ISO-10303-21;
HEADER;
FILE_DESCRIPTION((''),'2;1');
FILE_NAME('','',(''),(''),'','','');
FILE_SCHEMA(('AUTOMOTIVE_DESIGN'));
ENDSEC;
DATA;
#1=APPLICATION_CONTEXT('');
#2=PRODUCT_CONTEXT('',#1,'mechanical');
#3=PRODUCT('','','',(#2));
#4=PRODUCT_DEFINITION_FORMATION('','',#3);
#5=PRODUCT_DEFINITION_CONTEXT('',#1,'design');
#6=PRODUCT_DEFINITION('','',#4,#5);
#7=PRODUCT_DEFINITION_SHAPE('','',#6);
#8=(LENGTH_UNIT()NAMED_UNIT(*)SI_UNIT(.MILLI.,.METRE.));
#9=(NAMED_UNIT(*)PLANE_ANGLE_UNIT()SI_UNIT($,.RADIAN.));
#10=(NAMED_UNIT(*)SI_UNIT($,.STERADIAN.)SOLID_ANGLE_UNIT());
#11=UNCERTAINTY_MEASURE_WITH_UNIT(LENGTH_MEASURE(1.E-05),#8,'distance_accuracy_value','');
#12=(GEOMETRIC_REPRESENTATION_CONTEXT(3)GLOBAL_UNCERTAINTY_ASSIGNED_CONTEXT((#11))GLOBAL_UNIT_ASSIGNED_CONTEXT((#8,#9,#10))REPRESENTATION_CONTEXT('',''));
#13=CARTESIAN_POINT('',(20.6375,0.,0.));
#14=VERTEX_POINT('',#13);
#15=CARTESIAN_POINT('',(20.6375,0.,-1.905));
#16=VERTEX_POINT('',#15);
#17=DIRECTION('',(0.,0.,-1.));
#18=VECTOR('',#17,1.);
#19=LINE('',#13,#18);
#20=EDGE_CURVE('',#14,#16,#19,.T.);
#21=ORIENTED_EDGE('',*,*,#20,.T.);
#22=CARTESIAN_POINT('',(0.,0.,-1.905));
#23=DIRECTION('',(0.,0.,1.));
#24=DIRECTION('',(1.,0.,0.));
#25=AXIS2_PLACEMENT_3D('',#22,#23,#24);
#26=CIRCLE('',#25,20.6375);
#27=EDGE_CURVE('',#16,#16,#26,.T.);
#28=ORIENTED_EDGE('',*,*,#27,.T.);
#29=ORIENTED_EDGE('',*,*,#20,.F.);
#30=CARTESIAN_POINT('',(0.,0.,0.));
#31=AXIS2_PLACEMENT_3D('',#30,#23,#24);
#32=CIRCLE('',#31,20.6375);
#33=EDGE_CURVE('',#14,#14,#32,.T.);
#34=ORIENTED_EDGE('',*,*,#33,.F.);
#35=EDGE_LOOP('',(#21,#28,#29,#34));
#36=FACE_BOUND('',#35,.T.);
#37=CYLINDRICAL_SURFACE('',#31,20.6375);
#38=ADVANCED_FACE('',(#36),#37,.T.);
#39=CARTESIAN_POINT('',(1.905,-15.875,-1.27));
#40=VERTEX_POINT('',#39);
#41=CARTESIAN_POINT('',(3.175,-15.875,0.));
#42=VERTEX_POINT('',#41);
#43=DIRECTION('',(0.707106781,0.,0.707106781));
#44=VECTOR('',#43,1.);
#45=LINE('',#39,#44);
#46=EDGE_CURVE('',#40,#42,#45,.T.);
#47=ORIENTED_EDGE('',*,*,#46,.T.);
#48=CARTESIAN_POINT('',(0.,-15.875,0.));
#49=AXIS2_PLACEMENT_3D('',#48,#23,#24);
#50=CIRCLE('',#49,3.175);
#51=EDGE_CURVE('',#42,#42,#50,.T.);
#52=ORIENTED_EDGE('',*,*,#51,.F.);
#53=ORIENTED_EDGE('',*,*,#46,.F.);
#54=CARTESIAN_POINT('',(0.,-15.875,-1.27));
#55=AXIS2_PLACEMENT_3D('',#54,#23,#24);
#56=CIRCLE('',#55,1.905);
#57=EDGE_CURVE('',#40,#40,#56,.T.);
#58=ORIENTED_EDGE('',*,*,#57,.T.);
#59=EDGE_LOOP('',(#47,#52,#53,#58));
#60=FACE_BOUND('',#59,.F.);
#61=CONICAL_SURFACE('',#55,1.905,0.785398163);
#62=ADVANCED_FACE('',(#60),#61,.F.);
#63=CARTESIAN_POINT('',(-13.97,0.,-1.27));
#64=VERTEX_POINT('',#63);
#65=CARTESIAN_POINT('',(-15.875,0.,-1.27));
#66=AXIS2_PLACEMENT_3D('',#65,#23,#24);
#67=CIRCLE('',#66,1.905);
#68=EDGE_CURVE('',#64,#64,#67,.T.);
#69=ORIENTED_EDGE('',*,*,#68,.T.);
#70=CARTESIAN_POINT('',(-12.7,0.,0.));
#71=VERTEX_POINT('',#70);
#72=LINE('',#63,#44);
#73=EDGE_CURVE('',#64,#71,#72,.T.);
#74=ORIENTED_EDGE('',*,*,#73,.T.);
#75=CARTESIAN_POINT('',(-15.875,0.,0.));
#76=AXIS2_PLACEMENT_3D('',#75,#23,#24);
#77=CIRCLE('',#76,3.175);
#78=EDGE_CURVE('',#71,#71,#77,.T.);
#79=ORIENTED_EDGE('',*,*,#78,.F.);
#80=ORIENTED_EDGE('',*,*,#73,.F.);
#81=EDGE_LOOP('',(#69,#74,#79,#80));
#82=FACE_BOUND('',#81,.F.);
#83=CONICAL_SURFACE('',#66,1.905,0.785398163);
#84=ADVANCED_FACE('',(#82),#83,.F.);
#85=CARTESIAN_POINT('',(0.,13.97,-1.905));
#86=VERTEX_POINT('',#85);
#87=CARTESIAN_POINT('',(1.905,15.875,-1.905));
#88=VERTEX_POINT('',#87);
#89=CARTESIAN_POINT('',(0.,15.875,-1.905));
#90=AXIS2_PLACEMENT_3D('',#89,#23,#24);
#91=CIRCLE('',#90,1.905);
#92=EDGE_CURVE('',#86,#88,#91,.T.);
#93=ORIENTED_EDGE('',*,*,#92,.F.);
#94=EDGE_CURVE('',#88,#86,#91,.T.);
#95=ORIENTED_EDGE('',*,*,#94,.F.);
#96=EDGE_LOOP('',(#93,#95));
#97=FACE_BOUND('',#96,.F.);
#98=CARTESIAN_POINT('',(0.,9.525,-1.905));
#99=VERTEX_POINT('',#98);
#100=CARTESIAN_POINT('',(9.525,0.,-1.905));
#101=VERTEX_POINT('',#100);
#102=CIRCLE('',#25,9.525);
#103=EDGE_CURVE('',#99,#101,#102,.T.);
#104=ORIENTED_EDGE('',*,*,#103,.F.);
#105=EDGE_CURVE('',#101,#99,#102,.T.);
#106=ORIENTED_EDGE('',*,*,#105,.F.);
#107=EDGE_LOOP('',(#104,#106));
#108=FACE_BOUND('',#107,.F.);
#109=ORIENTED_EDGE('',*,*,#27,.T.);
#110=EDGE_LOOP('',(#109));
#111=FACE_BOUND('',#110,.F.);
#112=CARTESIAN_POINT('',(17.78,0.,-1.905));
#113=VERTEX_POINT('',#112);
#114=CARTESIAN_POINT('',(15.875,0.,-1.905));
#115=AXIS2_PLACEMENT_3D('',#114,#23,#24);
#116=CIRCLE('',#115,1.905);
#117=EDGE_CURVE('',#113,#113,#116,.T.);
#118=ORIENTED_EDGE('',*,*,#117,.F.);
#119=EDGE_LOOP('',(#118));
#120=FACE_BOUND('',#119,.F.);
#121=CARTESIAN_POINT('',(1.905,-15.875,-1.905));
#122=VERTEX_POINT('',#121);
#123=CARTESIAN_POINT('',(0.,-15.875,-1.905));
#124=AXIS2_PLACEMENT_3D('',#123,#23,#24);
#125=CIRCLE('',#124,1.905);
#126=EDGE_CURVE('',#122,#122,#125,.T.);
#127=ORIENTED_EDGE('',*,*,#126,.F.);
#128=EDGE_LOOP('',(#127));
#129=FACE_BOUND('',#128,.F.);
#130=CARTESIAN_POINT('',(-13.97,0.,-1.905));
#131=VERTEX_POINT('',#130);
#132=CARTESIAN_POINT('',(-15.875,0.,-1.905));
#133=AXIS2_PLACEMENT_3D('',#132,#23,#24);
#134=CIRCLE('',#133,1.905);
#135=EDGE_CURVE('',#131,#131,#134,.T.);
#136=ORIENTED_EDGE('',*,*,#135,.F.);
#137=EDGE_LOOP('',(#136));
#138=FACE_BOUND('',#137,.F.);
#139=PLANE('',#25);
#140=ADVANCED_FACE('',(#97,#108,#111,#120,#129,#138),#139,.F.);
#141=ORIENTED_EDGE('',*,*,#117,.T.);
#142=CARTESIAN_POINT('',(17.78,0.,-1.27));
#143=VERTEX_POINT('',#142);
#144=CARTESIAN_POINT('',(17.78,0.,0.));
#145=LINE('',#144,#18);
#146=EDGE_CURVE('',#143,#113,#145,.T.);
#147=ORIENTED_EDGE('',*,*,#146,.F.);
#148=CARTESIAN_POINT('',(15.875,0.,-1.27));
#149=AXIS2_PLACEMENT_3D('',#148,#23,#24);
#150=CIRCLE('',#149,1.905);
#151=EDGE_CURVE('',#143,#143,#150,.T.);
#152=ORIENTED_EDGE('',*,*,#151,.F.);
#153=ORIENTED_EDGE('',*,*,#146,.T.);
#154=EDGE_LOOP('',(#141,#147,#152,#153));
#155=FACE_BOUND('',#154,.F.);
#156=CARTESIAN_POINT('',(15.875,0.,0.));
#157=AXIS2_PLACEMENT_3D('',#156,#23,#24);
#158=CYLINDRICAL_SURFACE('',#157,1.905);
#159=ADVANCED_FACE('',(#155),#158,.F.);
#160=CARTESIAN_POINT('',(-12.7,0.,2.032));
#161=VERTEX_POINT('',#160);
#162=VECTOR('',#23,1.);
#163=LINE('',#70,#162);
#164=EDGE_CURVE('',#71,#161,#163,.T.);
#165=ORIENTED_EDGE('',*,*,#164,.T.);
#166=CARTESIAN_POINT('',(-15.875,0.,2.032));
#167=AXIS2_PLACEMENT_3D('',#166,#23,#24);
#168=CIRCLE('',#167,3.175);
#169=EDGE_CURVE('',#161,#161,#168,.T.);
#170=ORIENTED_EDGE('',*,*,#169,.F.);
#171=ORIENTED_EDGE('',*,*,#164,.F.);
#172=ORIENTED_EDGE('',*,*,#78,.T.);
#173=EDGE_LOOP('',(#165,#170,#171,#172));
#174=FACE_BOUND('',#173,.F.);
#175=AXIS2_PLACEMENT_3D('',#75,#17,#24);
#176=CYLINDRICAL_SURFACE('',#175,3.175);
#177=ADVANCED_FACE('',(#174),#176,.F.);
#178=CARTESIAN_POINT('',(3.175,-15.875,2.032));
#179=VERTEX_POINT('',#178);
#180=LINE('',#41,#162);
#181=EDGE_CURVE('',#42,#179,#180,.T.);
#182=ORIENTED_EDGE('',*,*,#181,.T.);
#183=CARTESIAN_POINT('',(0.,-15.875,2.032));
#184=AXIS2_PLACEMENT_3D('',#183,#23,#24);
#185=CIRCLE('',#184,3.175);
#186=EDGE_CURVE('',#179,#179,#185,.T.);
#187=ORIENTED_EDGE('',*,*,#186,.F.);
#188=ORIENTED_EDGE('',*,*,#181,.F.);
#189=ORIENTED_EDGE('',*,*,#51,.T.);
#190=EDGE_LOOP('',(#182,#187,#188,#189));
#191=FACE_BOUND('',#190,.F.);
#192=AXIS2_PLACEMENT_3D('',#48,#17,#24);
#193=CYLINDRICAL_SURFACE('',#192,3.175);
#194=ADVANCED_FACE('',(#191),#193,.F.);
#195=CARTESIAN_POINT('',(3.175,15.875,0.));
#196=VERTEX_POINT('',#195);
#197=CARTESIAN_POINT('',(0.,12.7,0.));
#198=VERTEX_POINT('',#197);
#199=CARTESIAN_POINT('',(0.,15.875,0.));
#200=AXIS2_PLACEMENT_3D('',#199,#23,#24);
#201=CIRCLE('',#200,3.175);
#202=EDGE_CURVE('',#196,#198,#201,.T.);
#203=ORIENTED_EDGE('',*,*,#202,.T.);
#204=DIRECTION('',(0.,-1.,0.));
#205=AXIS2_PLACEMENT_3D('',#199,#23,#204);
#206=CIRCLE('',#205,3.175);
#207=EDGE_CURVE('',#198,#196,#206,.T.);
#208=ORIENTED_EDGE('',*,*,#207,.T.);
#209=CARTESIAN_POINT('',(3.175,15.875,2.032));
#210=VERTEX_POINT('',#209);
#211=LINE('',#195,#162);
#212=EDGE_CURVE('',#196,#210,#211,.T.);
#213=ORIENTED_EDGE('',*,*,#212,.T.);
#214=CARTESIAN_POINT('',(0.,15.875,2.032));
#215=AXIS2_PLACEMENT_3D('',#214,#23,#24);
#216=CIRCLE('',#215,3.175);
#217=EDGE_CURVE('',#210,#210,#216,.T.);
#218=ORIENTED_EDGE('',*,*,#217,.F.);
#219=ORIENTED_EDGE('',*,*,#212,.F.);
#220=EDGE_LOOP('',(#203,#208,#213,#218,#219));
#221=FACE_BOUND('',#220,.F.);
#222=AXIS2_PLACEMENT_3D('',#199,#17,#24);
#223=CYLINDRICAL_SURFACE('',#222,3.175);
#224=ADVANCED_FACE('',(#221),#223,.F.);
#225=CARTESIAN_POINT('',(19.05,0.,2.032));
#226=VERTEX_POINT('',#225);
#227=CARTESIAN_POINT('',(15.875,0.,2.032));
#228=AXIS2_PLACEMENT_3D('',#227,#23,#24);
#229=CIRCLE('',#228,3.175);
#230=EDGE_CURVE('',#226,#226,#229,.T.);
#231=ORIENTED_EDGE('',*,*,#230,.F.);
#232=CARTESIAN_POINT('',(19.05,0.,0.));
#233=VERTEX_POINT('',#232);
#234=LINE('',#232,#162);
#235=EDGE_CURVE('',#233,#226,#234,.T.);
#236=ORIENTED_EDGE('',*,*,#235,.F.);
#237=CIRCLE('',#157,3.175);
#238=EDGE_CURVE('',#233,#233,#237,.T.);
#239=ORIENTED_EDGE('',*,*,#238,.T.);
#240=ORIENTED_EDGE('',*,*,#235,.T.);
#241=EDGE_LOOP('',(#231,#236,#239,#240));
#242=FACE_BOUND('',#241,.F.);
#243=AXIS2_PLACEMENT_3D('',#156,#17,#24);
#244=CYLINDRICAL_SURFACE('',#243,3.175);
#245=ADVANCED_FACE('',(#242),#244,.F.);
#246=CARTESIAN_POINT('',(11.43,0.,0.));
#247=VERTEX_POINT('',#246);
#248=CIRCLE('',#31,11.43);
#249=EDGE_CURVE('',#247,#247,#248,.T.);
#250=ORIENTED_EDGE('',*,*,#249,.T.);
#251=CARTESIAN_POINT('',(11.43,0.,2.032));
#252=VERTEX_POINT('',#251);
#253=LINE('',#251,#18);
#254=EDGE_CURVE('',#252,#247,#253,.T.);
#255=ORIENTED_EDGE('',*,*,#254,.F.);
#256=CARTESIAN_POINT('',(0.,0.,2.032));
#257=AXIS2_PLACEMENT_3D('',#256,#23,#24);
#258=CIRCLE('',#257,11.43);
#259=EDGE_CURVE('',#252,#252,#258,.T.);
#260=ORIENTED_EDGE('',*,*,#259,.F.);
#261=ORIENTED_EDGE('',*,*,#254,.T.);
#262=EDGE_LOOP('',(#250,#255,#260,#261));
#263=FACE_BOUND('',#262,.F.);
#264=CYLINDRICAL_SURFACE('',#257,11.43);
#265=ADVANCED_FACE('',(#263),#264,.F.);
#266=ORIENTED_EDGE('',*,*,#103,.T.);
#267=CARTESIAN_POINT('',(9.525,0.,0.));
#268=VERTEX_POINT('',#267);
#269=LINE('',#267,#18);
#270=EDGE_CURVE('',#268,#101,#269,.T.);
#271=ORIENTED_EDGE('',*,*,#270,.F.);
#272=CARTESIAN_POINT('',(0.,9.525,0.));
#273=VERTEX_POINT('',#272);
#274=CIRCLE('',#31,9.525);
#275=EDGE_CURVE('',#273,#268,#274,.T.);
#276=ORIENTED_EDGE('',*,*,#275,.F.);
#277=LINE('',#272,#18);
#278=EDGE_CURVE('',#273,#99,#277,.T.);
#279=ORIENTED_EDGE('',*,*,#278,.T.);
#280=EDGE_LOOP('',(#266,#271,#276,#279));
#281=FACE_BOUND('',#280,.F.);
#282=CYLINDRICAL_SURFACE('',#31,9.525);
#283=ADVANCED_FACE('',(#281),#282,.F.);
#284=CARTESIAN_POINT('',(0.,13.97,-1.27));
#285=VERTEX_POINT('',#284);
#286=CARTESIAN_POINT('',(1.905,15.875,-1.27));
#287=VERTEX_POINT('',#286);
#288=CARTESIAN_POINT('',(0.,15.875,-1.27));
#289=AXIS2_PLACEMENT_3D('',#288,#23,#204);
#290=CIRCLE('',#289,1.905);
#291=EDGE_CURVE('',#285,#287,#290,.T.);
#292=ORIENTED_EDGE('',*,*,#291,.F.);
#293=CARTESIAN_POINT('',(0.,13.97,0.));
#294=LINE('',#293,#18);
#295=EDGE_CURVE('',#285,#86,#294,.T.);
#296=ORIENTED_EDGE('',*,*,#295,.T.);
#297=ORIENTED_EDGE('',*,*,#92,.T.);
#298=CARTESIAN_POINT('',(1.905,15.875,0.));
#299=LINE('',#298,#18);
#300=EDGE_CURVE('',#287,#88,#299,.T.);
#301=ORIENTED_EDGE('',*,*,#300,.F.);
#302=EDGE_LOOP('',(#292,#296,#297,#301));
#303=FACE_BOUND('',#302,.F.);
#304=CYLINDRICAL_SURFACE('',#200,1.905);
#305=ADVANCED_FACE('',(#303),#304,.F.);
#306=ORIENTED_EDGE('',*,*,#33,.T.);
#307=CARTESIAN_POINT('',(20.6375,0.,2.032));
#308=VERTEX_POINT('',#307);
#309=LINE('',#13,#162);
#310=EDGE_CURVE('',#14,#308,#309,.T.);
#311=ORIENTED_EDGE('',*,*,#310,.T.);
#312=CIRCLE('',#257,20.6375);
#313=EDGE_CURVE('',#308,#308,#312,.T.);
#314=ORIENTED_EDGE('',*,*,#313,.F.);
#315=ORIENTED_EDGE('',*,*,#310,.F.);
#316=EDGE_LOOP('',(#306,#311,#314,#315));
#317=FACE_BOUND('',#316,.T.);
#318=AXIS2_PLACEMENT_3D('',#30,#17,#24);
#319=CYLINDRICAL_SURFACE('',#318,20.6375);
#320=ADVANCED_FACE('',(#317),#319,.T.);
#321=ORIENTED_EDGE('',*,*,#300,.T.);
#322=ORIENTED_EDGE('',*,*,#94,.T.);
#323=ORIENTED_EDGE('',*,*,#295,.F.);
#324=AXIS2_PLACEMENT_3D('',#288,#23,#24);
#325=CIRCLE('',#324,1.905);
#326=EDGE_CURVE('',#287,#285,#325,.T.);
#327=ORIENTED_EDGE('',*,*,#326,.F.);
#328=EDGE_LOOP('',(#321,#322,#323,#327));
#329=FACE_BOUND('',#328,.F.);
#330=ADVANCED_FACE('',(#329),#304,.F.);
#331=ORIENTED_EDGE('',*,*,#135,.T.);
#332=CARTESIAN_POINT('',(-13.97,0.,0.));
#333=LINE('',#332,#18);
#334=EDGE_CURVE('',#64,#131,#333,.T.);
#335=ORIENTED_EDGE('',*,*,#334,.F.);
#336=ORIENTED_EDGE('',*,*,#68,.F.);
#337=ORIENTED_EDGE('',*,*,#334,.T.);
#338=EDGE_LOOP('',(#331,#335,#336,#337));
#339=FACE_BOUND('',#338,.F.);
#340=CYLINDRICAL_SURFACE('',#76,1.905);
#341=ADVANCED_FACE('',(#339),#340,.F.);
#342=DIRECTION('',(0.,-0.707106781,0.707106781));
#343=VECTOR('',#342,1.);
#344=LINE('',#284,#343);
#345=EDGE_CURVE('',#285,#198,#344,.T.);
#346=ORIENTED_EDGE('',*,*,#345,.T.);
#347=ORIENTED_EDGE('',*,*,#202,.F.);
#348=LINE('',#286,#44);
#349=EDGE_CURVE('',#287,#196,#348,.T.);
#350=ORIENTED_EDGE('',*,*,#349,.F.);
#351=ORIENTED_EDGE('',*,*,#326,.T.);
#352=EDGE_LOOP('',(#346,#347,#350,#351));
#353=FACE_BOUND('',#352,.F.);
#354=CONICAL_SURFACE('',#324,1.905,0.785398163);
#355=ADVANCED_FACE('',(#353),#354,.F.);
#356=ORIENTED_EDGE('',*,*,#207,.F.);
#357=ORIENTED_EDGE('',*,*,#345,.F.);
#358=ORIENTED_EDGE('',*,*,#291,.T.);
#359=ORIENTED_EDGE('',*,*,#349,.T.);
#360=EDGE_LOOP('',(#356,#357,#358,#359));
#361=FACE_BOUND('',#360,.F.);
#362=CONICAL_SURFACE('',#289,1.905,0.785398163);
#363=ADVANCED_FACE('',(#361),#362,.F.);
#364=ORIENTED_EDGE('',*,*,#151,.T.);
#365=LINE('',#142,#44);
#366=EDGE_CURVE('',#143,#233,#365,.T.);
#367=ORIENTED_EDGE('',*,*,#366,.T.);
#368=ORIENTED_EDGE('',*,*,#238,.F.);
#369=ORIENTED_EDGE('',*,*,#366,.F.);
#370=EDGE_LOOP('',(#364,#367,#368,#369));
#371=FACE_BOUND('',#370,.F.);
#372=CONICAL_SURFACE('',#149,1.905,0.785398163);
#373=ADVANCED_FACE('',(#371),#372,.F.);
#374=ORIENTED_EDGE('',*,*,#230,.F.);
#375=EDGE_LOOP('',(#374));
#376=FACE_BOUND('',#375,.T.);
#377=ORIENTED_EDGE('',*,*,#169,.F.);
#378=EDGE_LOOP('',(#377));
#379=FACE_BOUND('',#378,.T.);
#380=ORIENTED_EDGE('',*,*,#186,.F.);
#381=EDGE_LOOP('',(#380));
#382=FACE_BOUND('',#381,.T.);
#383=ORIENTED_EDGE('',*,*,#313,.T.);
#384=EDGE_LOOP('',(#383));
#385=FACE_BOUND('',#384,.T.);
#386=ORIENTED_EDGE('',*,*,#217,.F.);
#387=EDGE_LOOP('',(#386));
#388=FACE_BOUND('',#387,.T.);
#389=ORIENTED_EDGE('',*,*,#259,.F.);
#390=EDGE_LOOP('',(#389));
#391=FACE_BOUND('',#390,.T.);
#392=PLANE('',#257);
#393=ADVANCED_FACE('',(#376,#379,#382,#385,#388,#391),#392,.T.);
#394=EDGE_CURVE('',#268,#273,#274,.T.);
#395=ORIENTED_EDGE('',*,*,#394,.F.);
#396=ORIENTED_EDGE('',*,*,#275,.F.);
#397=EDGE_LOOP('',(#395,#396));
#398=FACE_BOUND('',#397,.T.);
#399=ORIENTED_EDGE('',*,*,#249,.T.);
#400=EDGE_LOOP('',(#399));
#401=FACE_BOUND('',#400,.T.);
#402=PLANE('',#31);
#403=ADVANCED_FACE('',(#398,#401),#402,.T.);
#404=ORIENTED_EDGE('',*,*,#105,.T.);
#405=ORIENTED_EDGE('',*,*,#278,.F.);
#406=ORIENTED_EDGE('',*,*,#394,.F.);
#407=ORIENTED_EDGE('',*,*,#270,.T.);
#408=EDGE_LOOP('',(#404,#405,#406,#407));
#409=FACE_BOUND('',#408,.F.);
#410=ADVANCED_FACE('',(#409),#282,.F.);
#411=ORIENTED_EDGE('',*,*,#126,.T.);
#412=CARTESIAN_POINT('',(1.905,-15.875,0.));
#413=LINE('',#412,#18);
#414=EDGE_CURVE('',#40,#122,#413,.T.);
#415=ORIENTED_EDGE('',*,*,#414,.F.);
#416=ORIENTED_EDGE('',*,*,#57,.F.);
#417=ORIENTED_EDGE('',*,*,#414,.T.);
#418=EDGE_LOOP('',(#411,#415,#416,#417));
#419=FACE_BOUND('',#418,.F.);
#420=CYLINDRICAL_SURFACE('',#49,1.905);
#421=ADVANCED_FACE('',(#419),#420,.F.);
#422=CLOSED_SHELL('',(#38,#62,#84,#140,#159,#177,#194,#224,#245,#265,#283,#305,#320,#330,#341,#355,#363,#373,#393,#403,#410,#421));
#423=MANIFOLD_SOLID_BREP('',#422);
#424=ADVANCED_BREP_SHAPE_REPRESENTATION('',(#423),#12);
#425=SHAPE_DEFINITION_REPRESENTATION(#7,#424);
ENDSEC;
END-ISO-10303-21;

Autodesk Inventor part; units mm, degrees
ref_plane "YZ Plane" through (0, 0, 0) normal (1, 0, 0) x (0, 1, 0)
ref_plane "XZ Plane" through (0, 0, 0) normal (0, 1, 0) x (-1, 0, 0)
ref_plane "XY Plane" through (0, 0, 0) normal (0, 0, 1) x (1, 0, 0)
sketch "Sketch1" plane through (0, 0, 0) normal (0, 0, 1) x (1, 0, 0)
  circle A0 centre (0, 0) radius 9.525
  line L0 (0, 0) -> (0, 15.875)
  circle A1 centre (0, 15.875) radius 1.905
  circle A2 centre (-15.875, 0) radius 1.905
  circle A3 centre (0, -15.875) radius 1.905
  circle A4 centre (15.875, 0) radius 1.905
  circle A5 centre (0, 0) radius 20.6375
  dimension "d0" = 19.05
  dimension "d1" = 15.875
  dimension "d2" = 3.81
  dimension "d5" = 360
  dimension "d7" = 41.275
extrude "Extrusion1" add sketch "Sketch1" against normal blind 1.905
chamfer "Chamfer1" distance 1.27 angle 45 4 edges at (-1.905, 15.875, 0) (13.97, 0, 0) (-1.905, -15.875, 0) (-17.78, 0, 0)
sketch "Sketch4" plane through (0, 0, 0) normal (0, 0, 1) x (1, 0, 0)
  circle A0 centre (0, -15.875) radius 3.175 projected
  circle A1 centre (0, 15.875) radius 3.175 projected
  circle A2 centre (0, 0) radius 9.525 projected
  circle A3 centre (0, 0) radius 20.6375 projected
  circle A4 centre (15.875, 0) radius 3.175 projected
  circle A5 centre (-15.875, 0) radius 3.175 projected
extrude "Extrusion3" add sketch "Sketch4" along normal blind 2.032
sketch "Sketch5" plane through (0, 0, 2.032) normal (0, 0, 1) x (1, 0, 0)
  circle A0 centre (0, 0) radius 11.43
  dimension "d17" = 22.86
extrude "Extrusion4" cut sketch "Sketch5" against normal blind 2.032
properties part number "RadialBearingMountCover"
